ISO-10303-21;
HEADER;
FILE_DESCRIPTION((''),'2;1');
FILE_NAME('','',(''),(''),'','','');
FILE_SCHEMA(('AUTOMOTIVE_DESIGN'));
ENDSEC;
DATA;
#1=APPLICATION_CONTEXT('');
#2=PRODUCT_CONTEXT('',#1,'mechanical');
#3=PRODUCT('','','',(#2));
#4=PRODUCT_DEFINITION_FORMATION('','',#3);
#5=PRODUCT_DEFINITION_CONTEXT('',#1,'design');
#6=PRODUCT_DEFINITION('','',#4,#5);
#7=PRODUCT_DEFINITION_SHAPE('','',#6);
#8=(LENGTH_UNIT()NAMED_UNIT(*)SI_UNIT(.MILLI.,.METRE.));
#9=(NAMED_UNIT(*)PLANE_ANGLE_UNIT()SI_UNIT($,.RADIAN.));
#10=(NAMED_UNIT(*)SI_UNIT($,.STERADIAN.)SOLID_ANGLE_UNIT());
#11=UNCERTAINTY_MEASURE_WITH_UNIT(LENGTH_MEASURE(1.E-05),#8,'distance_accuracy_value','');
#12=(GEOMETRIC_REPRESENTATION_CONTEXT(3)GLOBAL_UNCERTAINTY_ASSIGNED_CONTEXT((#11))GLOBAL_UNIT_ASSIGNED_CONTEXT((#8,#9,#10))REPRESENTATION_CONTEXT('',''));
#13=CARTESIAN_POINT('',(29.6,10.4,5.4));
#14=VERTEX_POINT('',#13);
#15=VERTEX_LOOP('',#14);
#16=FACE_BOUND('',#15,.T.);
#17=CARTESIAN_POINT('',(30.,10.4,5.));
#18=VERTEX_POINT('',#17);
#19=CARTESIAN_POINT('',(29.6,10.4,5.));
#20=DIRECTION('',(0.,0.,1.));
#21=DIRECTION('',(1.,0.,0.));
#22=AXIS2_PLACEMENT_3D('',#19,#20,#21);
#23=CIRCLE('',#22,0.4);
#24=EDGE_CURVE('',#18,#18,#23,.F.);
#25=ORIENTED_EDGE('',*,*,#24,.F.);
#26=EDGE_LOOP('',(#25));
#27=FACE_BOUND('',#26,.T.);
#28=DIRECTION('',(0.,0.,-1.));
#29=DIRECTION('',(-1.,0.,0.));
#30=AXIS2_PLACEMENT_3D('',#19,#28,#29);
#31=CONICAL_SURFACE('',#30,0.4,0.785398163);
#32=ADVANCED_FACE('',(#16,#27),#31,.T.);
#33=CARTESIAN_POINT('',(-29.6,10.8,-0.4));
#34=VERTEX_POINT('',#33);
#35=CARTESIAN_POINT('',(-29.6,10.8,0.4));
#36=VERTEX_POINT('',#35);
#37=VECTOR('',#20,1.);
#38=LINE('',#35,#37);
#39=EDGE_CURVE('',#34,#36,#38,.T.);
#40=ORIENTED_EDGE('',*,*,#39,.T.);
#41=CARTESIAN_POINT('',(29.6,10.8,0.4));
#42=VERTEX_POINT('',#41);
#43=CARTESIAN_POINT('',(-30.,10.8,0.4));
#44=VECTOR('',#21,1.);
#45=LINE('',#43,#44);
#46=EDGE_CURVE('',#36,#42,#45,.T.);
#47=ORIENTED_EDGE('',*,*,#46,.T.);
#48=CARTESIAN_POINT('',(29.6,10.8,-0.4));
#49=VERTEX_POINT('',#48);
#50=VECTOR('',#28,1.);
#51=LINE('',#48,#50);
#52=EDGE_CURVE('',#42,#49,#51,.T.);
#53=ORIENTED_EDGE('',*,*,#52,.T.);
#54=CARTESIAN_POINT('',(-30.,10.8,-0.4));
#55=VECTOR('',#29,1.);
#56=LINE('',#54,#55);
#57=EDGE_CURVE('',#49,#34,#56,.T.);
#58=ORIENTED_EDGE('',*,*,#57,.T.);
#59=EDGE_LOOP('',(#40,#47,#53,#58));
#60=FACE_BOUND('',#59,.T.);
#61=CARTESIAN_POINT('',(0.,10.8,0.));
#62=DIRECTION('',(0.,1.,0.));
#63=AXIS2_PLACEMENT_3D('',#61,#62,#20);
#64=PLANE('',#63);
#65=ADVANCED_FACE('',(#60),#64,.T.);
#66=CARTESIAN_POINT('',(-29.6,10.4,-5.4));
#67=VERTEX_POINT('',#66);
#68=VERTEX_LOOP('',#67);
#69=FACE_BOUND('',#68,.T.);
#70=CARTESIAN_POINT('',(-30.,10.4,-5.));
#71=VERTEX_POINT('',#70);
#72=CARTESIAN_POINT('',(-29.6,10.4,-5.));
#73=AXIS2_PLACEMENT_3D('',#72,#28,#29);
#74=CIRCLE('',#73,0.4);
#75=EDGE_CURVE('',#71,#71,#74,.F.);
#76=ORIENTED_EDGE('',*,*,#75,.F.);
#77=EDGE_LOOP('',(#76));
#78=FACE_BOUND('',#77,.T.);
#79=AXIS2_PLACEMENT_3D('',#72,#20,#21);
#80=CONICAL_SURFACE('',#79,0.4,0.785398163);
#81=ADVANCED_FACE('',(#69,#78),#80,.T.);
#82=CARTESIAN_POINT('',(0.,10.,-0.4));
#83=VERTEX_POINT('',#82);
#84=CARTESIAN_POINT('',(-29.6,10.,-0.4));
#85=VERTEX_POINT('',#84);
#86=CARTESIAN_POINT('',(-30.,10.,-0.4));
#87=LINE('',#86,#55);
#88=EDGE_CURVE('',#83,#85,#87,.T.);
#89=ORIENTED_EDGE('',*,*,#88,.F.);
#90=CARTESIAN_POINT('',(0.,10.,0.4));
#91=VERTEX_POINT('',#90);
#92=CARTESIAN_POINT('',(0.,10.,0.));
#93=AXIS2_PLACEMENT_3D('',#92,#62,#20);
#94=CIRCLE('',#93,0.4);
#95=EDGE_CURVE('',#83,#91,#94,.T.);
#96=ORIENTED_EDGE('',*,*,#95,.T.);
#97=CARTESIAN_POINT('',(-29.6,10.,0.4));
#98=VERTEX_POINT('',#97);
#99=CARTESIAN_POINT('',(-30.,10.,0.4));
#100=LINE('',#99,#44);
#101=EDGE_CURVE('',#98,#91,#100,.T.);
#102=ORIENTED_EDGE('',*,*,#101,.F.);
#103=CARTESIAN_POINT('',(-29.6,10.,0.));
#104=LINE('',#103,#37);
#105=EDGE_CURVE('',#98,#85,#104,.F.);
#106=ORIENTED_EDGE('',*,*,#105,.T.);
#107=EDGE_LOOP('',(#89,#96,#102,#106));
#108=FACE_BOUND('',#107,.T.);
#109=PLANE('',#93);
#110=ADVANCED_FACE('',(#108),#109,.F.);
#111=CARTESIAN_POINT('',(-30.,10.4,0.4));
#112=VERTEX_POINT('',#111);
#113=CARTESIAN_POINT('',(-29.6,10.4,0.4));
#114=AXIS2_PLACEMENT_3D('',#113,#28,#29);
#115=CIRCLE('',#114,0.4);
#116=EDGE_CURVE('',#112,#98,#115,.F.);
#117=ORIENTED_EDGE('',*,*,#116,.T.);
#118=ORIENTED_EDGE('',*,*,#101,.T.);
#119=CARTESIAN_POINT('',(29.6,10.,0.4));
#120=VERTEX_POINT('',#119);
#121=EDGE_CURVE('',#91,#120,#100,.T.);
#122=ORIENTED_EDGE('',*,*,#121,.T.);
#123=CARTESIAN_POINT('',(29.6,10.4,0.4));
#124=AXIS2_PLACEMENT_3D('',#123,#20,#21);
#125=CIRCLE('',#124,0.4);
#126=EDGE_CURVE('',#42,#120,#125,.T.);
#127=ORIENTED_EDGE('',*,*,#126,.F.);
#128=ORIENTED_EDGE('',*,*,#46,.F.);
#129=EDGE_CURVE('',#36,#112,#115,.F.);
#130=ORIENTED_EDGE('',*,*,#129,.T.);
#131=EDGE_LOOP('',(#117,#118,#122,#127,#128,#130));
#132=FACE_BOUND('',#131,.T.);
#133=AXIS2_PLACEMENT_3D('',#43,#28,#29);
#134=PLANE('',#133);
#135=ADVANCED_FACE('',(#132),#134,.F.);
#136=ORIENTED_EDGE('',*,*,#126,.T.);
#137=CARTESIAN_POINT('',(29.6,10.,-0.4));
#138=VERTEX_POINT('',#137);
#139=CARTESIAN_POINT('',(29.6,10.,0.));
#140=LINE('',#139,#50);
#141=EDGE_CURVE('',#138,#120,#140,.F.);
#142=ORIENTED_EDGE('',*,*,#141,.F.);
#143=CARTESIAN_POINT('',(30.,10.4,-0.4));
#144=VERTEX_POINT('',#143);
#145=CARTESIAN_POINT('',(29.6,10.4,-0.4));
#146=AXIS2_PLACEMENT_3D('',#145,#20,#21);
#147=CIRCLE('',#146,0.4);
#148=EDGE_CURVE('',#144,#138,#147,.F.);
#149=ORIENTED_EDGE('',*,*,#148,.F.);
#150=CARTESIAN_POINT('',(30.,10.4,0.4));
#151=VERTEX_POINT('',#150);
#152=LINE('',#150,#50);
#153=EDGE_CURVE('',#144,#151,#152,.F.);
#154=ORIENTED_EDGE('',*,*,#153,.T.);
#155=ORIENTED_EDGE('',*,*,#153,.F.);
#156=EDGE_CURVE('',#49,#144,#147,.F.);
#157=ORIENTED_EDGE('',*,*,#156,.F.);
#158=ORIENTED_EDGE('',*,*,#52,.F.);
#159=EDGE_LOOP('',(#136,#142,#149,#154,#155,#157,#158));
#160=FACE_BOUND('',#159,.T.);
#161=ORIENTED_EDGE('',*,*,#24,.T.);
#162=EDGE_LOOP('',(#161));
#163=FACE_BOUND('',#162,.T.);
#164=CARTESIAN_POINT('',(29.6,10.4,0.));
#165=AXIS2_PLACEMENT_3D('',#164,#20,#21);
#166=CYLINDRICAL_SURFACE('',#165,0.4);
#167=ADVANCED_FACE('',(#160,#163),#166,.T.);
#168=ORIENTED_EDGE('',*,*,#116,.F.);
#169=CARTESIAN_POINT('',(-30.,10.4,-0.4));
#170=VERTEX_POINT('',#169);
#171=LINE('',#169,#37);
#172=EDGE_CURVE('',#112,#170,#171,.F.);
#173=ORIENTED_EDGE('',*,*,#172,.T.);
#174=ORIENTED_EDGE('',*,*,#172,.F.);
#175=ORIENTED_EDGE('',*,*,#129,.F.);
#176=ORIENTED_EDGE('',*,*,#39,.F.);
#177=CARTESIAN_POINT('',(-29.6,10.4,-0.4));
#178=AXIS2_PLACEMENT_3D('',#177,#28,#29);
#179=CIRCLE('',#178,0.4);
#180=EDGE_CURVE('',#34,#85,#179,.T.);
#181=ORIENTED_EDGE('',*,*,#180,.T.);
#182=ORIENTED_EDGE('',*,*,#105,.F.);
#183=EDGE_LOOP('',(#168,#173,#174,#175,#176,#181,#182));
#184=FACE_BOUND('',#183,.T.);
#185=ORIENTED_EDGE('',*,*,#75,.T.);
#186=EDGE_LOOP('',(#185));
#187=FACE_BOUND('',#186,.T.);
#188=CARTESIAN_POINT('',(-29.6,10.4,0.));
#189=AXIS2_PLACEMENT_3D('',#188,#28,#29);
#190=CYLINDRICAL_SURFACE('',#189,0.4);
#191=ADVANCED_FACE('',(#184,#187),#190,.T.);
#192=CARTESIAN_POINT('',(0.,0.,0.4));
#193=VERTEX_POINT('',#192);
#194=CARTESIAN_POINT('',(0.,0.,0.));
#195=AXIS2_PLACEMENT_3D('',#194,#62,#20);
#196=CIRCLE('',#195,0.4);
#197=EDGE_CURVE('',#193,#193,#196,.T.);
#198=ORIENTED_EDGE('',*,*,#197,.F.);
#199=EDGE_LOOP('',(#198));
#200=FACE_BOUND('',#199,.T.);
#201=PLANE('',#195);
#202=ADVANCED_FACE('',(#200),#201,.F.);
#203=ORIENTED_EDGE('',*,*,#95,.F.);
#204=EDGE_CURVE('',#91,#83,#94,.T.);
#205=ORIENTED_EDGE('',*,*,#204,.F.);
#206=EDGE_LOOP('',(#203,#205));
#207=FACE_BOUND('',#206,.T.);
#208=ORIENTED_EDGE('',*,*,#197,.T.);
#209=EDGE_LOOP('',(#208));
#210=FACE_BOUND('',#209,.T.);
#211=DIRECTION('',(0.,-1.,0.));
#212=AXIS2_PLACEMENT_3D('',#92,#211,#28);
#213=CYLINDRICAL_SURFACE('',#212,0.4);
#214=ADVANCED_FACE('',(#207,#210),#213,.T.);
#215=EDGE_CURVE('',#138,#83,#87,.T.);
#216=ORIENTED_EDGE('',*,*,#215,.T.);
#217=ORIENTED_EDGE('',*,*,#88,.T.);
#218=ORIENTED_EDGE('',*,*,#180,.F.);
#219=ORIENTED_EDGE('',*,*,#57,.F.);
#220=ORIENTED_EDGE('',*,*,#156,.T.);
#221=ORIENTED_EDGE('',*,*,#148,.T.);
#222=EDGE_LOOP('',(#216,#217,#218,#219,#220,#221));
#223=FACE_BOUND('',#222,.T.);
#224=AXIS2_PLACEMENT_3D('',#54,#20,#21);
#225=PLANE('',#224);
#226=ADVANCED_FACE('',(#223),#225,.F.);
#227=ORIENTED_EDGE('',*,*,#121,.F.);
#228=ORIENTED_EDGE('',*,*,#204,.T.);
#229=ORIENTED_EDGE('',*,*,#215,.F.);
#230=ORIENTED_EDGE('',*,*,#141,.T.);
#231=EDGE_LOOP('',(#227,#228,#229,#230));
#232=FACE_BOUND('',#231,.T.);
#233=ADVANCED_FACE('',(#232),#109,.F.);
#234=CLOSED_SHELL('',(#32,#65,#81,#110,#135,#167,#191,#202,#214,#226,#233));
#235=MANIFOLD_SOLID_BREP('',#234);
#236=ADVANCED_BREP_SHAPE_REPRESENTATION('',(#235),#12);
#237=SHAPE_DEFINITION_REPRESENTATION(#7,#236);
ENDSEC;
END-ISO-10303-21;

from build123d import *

# Parameters (mm, degrees)
SKETCH_1_R      = 0.4
EXTRUDE_1_DEPTH = 10
SKETCH_2_W      = 60
SKETCH_2_H      = 0.8
EXTRUDE_2_DEPTH = 0.8
FILLET_1_R      = 0.4
SKETCH_3_R      = 0.4
EXTRUDE_3_DEPTH = 5
SKETCH_4_R      = 0.4
EXTRUDE_4_DEPTH = 5
CHAMFER_1_SIZE  = 0.4


with BuildPart() as part:
    # 草图1 → 凸台-拉伸1 (new body)
    with BuildSketch(Plane(origin=(0, 0, 0), x_dir=(1, 0, 0), z_dir=(0, 1, 0))):
        with Locations(Location((0, 0, 0), (0, 0, 270))):
            Circle(SKETCH_1_R)
    extrude(amount=EXTRUDE_1_DEPTH)

    # 草图2 → 凸台-拉伸2 (add)
    with BuildSketch(Plane(origin=(0, 10, 0), x_dir=(1, 0, 0), z_dir=(0, 1, 0))):
        Rectangle(SKETCH_2_W, SKETCH_2_H)
    extrude(amount=EXTRUDE_2_DEPTH)

    # 圆角1
    fillet_1_edges = [part.edges().sort_by_distance(p)[0] for p in [
        (30, 10, 0),
        (30, 10.8, 0),
        (-30, 10, 0),
        (-30, 10.8, 0),
    ]]
    fillet(fillet_1_edges, radius=FILLET_1_R - 0.0001)  # a hair under: the kernel refuses the full size

    # 草图3 → 凸台-拉伸3 (add)
    with BuildSketch(Plane.XY.offset(0.4)):
        with Locations((29.6, 10.4)):
            Circle(SKETCH_3_R)
    extrude(amount=EXTRUDE_3_DEPTH)

    # 草图4 → 凸台-拉伸4 (add)
    with BuildSketch(Plane(origin=(0, 0, -0.4), x_dir=(-1, 0, 0), z_dir=(0, 0, -1))):
        with Locations((29.6, 10.4)):
            Circle(SKETCH_4_R)
    extrude(amount=EXTRUDE_4_DEPTH)

    # 倒角1
    chamfer_1_edges = [part.edges().sort_by_distance(p)[0] for p in [
        (29.2, 10.4, 5.4),
        (-29.2, 10.4, -5.4),
    ]]
    chamfer(chamfer_1_edges, length=CHAMFER_1_SIZE)


solid = part.part
